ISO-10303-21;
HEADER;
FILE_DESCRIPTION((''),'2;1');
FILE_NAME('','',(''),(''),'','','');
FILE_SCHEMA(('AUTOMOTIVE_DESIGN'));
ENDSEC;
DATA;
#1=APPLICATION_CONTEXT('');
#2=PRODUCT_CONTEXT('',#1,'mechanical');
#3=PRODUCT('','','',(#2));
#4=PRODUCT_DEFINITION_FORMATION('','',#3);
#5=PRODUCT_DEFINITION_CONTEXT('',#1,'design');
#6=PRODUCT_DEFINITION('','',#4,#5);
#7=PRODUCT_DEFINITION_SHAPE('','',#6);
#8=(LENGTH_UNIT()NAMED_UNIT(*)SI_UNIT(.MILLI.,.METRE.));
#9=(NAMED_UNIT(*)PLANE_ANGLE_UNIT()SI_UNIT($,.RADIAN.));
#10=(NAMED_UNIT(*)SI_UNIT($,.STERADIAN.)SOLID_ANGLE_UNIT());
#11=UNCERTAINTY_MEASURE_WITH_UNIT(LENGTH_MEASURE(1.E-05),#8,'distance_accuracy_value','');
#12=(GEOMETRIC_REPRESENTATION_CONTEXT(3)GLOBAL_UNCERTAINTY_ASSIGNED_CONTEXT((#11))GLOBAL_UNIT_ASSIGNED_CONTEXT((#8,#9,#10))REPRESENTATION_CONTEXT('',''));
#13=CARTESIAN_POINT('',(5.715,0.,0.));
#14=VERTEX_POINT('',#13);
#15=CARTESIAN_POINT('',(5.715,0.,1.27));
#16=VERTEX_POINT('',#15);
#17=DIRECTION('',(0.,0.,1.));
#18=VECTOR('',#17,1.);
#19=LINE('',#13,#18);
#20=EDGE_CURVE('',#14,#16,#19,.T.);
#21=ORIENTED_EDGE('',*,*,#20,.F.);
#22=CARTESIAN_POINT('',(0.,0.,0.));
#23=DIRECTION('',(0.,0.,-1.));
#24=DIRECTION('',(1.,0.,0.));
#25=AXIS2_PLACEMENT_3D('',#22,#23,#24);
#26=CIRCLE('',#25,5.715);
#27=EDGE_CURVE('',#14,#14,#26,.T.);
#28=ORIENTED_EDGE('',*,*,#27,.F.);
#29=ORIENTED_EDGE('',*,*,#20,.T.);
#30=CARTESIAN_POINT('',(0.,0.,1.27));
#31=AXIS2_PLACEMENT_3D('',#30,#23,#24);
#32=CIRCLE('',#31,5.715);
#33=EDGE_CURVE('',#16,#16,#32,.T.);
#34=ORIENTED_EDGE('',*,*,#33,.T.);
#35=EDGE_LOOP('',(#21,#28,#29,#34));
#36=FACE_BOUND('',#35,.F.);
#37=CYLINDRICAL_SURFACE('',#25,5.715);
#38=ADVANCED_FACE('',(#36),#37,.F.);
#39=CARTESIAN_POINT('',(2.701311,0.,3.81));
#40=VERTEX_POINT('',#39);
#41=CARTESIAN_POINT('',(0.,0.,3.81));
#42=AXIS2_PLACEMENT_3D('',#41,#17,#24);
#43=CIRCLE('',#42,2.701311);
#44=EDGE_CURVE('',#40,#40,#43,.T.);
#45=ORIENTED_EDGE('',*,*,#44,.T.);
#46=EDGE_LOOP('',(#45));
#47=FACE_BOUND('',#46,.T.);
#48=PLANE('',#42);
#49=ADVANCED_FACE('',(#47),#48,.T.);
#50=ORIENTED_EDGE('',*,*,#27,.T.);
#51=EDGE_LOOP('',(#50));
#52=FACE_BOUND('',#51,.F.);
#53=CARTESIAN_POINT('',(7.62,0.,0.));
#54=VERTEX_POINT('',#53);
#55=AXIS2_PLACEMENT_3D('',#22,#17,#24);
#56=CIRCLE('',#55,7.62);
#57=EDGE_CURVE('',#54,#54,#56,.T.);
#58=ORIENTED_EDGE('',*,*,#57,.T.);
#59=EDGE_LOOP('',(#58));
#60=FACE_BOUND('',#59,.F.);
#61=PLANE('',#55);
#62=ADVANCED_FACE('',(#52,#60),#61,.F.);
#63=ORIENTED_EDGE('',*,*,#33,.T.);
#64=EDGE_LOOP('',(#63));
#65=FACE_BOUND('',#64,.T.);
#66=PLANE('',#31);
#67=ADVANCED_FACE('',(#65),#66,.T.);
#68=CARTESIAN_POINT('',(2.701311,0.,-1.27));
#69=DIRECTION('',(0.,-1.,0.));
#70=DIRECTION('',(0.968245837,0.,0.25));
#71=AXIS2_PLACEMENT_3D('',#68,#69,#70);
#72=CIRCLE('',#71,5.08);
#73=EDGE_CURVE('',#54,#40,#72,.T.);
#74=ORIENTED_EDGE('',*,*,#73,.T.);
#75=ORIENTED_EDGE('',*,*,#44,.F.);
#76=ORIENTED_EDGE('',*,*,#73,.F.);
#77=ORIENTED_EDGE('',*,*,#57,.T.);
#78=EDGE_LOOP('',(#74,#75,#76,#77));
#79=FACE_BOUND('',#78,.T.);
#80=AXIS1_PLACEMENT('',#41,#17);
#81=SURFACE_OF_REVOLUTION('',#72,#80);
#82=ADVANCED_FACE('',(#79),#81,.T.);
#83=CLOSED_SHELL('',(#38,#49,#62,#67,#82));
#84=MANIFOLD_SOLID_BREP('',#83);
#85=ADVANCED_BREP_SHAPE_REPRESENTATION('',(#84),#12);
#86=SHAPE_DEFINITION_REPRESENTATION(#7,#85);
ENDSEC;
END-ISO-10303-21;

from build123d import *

# Parameters (mm, degrees)
F0_R     = 7.62
F1_DEPTH = 3.81
F3_R     = 5.715
F4_DEPTH = 1.27


# Not quite as in the source:
# - a fillet or chamfer that OpenCascade refuses, or shapes differently, is made with other operations: its cross-section is extruded or revolved along the edge and cut away or added


with BuildPart() as f1:
    # F0 (on Top) → F1 (new body)
    with BuildSketch(Plane.XY):
        Circle(F0_R)
    extrude(amount=F1_DEPTH)

    # F2: fillet of radius 5.08 on 1 edges, made by hand

    # F2_s1 → F2_t2 (revolve, cut)
    with BuildSketch(Plane.XZ):
        with BuildLine():
            ThreePointArc((7.62, 0), (5.8121631237, 2.7460926284), (2.7013111503, 3.81))
            Line((2.7013111503, 3.81), (7.62, 3.81))
            Line((7.62, 3.81), (7.62, 0))
        make_face()
    revolve(axis=Axis((0, 0, 3.81), (0, 0, 1)), mode=Mode.SUBTRACT)

    # F3 (on face) → F4 (cut)
    with BuildSketch(Plane(origin=(0, 0, 0), x_dir=(1, 0, 0), z_dir=(0, 0, -1))):
        Circle(F3_R)
    extrude(amount=-F4_DEPTH, mode=Mode.SUBTRACT)


solid = f1.part
